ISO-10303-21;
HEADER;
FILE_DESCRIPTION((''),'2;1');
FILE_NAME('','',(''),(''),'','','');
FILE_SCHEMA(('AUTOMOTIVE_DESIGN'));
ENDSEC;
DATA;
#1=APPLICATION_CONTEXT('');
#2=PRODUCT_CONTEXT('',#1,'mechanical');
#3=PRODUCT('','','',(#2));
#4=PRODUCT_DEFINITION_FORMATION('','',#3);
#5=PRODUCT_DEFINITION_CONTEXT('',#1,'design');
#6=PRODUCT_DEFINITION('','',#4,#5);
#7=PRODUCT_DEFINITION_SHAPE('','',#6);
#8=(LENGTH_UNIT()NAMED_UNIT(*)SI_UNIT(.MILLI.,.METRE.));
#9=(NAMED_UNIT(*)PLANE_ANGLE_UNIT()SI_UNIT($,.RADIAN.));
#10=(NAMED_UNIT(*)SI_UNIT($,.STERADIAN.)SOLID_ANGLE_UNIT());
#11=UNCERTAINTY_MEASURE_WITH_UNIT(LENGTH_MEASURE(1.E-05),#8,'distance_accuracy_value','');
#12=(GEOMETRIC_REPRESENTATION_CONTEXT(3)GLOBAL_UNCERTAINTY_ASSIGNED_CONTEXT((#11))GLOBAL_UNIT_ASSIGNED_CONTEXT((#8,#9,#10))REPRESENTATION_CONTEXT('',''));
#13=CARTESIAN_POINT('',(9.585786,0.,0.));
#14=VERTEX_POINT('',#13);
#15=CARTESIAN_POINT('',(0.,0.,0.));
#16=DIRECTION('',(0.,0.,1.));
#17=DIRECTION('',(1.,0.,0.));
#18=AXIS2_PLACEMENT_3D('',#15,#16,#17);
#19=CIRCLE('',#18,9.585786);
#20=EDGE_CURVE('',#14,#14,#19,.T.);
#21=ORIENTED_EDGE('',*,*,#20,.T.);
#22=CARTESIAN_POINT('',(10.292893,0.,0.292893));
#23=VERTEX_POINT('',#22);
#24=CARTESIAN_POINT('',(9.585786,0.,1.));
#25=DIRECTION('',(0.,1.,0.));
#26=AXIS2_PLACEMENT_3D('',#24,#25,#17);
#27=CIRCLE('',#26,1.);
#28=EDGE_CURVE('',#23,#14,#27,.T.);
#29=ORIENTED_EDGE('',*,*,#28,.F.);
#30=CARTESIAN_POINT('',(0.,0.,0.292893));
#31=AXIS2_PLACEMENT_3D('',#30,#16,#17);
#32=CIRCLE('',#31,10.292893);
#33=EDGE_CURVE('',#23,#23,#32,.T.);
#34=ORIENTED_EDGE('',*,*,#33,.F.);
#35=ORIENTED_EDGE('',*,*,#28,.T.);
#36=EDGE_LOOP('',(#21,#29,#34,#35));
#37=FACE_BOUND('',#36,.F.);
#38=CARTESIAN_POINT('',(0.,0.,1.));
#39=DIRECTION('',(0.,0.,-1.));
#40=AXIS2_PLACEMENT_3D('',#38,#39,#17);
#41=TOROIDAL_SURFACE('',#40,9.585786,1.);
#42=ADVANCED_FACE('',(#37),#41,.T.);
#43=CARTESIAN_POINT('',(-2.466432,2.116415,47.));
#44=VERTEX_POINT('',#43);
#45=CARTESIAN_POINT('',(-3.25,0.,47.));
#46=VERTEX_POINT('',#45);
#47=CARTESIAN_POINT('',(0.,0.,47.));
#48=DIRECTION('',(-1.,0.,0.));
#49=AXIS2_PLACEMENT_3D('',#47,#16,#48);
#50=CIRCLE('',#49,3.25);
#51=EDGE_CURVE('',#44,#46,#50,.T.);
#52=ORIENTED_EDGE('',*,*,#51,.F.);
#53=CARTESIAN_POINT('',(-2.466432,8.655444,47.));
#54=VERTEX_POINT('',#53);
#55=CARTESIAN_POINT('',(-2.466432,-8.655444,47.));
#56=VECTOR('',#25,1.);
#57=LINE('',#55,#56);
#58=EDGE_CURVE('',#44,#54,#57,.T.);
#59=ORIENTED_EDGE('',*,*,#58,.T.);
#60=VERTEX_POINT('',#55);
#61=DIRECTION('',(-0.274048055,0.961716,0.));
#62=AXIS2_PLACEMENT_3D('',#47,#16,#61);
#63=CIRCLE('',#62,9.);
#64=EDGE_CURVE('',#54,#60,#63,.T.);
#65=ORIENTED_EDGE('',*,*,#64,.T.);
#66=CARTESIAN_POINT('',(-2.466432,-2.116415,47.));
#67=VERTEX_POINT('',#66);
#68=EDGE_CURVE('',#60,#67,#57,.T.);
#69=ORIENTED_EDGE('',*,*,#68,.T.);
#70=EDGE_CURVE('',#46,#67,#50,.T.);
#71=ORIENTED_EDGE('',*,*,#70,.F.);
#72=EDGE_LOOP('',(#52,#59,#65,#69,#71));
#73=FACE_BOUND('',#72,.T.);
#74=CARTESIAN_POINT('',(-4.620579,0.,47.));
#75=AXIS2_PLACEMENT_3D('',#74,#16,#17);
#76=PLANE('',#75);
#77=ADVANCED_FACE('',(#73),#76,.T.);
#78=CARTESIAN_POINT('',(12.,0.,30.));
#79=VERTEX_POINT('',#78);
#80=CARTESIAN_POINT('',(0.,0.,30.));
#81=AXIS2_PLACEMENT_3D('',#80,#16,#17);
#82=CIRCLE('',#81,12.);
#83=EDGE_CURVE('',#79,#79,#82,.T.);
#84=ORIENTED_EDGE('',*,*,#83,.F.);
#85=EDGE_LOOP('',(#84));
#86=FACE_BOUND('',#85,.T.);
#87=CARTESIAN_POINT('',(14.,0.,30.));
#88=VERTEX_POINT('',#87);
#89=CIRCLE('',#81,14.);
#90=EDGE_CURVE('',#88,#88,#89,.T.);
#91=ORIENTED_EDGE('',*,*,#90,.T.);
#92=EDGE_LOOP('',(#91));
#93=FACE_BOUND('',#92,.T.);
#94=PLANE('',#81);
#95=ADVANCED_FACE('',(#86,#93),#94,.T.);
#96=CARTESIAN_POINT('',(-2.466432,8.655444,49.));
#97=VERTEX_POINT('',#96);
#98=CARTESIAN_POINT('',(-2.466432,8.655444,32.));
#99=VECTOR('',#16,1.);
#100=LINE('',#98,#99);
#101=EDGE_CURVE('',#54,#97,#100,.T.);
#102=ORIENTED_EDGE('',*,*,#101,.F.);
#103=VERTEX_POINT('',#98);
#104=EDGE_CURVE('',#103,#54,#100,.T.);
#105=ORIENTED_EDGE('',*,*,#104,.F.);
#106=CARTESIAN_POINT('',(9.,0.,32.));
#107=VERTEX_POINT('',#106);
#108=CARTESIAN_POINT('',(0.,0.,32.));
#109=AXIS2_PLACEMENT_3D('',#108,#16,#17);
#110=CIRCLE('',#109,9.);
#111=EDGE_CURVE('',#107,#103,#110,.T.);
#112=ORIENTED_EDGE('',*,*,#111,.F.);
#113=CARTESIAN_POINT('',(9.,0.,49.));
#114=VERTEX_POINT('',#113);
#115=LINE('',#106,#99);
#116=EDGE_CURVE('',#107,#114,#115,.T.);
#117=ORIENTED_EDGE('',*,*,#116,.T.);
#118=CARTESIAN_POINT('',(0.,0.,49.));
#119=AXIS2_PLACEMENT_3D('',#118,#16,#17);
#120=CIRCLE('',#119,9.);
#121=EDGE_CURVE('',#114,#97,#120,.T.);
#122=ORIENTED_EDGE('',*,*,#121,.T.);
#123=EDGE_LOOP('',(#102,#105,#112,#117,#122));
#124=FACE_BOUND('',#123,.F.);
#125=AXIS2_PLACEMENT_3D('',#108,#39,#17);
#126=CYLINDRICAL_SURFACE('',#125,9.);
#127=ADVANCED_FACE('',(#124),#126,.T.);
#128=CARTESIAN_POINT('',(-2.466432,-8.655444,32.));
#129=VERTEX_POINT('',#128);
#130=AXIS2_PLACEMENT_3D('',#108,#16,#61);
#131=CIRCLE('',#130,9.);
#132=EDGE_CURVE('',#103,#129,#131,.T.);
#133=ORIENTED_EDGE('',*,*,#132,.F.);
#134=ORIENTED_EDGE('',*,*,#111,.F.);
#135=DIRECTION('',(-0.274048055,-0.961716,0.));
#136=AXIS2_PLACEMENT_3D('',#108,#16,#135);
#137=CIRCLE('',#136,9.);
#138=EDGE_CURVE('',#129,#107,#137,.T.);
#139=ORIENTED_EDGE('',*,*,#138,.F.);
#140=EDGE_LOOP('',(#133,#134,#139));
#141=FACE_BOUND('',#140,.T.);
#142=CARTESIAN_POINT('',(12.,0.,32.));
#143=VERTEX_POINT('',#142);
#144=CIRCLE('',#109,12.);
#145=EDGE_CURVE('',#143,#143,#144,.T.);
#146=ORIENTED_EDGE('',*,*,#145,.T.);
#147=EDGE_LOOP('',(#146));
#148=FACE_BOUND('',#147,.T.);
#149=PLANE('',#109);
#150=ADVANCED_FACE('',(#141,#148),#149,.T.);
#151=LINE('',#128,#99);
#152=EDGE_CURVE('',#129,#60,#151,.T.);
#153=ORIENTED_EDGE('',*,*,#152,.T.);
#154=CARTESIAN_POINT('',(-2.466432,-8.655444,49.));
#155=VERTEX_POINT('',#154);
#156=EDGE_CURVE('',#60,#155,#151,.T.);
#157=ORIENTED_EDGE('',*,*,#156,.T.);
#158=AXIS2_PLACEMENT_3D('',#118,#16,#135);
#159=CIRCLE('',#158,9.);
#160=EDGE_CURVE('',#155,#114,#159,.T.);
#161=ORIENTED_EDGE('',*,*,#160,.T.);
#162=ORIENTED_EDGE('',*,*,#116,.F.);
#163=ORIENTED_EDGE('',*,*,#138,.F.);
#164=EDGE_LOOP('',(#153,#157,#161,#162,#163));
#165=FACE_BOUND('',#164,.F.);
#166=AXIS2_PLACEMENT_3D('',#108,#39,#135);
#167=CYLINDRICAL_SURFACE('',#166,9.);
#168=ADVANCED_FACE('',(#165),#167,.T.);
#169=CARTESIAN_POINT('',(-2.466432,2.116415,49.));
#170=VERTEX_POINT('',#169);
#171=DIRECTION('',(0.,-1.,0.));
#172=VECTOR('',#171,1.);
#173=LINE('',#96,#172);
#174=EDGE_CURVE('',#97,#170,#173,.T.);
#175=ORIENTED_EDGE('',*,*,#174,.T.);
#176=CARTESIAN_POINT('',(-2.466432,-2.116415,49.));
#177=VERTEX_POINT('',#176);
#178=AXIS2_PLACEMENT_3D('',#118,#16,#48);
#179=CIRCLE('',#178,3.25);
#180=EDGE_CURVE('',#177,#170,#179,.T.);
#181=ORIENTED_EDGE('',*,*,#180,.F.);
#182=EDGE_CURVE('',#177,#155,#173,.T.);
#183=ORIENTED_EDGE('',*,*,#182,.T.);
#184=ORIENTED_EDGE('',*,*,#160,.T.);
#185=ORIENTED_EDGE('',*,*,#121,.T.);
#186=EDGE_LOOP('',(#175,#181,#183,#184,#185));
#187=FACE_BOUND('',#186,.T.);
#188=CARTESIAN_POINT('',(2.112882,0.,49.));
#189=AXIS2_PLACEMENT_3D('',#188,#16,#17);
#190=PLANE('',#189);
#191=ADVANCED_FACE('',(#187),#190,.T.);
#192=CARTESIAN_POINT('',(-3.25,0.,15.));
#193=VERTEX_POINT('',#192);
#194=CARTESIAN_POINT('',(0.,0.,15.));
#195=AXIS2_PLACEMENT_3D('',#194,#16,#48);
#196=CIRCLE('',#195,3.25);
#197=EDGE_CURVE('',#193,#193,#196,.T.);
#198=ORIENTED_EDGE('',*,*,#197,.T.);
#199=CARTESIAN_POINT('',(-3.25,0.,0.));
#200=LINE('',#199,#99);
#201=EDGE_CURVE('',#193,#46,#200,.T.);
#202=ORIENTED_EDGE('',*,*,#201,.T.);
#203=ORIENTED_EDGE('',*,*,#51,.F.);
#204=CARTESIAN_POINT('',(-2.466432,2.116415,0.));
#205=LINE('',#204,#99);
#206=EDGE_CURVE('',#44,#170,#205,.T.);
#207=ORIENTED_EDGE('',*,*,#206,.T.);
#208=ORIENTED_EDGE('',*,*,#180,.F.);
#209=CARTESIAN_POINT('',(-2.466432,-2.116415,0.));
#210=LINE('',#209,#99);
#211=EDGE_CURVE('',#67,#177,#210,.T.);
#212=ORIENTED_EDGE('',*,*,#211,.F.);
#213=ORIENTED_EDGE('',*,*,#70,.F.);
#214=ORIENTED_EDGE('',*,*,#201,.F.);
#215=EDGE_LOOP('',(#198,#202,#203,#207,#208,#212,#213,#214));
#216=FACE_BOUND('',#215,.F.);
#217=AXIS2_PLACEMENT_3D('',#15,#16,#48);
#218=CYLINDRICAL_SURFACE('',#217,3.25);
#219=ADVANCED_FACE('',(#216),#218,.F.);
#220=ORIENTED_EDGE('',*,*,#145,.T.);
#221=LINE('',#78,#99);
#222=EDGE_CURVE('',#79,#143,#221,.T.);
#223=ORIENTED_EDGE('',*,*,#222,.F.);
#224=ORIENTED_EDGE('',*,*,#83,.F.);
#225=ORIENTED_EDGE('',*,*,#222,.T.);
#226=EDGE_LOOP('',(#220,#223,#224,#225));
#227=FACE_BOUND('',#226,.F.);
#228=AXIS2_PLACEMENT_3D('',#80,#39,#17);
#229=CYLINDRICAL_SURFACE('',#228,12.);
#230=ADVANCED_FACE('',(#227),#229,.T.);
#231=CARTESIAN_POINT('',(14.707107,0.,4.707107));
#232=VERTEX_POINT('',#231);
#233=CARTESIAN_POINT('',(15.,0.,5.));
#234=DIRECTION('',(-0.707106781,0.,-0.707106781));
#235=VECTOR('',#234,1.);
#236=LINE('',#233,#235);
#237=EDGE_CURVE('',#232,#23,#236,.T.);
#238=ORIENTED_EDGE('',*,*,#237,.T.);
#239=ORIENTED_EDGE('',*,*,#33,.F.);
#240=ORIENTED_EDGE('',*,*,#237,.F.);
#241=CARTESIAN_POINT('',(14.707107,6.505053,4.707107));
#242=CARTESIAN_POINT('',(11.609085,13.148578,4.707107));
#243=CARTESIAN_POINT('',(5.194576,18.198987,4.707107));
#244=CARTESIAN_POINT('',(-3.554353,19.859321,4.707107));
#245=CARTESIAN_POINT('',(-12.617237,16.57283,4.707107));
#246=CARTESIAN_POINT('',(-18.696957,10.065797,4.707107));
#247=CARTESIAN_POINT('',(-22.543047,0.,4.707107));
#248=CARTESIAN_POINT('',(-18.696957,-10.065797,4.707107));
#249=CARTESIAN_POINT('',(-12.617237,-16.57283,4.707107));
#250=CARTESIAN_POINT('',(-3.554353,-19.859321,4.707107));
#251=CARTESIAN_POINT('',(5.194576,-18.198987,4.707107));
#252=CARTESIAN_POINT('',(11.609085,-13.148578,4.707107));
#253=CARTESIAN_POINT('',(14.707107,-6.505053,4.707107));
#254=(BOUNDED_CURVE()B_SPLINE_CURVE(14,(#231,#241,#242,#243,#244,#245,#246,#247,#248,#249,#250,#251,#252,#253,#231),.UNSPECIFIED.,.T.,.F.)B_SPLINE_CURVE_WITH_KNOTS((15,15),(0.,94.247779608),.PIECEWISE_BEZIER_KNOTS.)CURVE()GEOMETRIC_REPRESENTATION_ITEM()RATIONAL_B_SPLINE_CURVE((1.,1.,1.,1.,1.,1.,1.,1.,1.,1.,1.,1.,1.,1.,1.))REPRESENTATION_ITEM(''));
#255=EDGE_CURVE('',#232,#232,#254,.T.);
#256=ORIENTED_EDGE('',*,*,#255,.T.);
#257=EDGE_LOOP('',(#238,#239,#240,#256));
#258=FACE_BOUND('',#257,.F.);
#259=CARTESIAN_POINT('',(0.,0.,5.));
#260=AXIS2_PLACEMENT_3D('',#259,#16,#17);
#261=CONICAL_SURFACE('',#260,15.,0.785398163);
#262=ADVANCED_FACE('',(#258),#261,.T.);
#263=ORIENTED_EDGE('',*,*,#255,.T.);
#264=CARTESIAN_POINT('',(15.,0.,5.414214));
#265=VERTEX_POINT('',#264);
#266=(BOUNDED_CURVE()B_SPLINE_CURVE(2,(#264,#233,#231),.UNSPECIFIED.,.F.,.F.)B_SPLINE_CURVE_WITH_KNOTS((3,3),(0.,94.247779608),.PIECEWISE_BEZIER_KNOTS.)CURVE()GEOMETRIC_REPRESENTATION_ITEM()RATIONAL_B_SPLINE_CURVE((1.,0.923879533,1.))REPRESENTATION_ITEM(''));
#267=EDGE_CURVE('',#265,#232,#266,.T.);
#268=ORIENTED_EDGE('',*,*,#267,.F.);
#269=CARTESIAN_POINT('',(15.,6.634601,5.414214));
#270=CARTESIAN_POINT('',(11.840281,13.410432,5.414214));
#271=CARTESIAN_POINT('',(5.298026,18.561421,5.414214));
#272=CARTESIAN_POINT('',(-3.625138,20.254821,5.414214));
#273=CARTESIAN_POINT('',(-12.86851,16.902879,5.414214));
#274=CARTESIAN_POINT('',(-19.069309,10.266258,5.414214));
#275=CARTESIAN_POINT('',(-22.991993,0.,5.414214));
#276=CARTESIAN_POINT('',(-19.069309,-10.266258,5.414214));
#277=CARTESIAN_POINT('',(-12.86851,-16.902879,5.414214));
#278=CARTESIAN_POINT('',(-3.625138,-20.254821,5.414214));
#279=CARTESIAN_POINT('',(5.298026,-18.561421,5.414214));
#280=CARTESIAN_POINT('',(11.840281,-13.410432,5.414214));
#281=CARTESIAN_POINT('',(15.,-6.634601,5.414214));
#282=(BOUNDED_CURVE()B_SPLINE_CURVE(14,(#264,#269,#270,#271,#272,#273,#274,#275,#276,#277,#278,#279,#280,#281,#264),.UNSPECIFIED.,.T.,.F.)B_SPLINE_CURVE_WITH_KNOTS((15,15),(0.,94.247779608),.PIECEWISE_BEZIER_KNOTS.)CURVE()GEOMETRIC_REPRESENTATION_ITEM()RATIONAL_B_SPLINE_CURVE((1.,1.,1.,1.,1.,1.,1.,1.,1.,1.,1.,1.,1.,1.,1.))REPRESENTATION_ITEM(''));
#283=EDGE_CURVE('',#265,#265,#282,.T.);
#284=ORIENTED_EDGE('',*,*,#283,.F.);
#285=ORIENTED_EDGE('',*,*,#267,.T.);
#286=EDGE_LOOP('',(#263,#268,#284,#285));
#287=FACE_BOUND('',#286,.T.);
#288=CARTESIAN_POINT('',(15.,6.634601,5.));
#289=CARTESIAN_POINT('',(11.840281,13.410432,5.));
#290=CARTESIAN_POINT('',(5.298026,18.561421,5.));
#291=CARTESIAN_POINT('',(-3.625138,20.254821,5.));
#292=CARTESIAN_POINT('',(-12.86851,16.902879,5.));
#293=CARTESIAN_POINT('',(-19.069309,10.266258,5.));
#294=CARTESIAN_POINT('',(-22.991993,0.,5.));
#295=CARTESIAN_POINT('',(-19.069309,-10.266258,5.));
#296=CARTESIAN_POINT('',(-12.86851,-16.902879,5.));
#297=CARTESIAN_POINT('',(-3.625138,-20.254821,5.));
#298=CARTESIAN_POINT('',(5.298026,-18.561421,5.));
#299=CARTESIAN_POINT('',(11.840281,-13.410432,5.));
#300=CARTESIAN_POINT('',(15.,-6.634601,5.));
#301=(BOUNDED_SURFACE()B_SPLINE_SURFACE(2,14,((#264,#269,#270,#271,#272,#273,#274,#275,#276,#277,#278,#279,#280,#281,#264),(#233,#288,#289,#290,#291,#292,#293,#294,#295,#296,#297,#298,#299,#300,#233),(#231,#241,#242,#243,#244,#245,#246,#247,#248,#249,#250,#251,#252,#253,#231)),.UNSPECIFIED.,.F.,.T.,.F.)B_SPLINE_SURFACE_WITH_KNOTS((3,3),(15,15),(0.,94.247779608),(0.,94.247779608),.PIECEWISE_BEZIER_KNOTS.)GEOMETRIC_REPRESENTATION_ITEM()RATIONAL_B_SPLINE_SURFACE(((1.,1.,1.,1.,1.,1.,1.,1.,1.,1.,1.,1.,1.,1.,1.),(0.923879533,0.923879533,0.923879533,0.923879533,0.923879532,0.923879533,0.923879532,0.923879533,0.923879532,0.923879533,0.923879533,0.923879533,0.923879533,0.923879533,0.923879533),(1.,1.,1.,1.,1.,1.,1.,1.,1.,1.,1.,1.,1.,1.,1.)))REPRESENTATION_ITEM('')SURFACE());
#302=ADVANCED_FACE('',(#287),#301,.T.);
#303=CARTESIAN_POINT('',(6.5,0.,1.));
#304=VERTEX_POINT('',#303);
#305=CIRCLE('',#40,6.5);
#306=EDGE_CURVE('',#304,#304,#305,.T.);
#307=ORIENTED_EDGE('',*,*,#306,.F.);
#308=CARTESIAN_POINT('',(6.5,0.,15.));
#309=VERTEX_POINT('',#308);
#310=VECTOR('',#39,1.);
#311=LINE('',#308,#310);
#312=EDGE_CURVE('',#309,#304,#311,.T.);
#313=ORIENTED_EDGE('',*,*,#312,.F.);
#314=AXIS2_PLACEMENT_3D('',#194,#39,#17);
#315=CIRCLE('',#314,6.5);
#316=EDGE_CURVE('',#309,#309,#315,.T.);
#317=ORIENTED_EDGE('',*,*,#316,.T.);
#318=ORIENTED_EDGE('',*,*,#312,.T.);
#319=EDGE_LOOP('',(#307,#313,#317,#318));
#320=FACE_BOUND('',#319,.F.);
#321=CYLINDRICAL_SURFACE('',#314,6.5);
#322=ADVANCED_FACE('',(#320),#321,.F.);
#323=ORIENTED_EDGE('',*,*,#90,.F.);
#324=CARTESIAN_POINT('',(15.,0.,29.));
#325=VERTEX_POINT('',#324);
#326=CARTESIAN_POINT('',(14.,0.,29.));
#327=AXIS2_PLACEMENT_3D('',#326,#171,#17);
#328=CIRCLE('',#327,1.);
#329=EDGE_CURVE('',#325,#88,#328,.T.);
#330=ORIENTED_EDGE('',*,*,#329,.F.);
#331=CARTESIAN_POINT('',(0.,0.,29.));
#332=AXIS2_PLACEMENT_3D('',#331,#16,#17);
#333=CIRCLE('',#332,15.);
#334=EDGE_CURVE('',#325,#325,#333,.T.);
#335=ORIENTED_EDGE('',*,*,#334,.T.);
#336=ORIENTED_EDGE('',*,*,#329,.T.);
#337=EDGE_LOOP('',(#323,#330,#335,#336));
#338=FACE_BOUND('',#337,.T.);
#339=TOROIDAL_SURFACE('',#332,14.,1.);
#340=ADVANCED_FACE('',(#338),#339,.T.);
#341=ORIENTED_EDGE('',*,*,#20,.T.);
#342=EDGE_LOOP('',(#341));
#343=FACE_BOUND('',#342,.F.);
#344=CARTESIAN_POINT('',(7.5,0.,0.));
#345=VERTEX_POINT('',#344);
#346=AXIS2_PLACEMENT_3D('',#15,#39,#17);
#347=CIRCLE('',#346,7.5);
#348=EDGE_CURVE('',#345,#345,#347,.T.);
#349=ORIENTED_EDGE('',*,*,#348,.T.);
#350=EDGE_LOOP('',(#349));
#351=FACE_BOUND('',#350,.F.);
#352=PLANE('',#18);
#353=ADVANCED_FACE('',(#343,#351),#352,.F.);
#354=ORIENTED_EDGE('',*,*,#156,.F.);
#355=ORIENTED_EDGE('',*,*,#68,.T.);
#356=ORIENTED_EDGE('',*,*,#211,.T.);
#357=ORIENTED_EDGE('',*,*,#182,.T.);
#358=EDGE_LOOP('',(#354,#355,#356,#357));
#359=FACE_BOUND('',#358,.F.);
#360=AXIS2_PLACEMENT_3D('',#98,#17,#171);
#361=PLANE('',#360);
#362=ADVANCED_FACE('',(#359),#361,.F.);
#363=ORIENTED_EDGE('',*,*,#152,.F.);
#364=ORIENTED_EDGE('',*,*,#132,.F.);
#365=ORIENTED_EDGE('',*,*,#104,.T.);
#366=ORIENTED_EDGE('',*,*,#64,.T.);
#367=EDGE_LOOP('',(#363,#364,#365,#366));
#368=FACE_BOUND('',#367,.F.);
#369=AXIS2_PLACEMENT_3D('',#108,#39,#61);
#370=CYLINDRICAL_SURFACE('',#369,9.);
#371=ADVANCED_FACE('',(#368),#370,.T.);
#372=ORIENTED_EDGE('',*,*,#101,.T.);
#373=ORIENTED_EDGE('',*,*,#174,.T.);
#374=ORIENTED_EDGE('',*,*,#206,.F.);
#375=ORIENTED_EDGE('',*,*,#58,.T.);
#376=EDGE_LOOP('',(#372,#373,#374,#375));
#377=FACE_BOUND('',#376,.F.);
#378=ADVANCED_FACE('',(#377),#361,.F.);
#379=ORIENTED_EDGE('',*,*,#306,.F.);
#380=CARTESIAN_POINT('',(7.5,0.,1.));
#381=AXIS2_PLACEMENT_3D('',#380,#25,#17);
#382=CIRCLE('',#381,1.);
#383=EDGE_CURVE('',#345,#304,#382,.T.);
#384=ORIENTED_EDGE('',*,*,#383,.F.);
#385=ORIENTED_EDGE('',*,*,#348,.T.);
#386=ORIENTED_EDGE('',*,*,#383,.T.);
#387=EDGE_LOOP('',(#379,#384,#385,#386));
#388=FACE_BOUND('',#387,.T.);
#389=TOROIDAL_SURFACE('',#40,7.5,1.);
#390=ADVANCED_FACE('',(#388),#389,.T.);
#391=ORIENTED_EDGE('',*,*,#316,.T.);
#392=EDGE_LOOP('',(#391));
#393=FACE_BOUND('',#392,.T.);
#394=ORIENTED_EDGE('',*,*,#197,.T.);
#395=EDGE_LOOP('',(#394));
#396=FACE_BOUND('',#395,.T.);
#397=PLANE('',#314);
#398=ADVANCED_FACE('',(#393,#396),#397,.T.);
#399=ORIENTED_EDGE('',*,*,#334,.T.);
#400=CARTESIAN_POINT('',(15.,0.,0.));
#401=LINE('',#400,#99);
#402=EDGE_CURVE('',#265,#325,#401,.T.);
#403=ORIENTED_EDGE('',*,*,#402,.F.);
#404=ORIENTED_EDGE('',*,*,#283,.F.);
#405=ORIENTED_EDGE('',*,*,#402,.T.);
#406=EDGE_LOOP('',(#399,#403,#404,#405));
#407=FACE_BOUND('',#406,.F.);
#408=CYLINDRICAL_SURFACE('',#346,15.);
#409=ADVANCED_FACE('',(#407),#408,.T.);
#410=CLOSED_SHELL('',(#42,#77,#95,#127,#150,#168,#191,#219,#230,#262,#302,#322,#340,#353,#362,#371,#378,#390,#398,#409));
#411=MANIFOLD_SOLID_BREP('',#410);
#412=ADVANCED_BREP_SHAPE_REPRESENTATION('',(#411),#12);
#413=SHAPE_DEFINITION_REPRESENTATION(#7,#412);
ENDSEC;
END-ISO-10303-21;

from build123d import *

# Parameters (mm, degrees)
F0_R           = 15
F1_DEPTH       = 30
F2_R           = 12
F3_DEPTH       = 2
F5_DEPTH       = 17
F6_DEPTH       = 15
F7_D           = 6.5
F7_CBORE_D     = 13
F7_CBORE_DEPTH = 15
F8_SIZE        = 5
F9_R           = 1


with BuildPart() as f1:
    # F0 (on Top) → F1 (new body)
    with BuildSketch(Plane.XY):
        Circle(F0_R)
    extrude(amount=F1_DEPTH)

    # F2 (on face) → F3 (join)
    with BuildSketch(Plane.XY.offset(30)):
        Circle(F2_R)
    extrude(amount=F3_DEPTH)

    # F4 (on face) → F5 (join)
    with BuildSketch(Plane.XY.offset(32)):
        with BuildLine():
            ThreePointArc((-2.4664324925, -8.6554439955), (5.4222738573, -7.1832406486), (9, 0))
            ThreePointArc((9, 0), (5.4222738573, 7.1832406486), (-2.4664324925, 8.6554439955))
            Line((-2.4664324925, 8.6554439955), (-2.4664324925, -8.6554439955))
        make_face()
    extrude(amount=F5_DEPTH)

    # F4 (on face) → F6 (join)
    with BuildSketch(Plane.XY.offset(32)):
        with BuildLine():
            Line((-2.4664324925, -8.6554439955), (-2.4664324925, 8.6554439955))
            ThreePointArc((-2.4664324925, 8.6554439955), (-9, 0), (-2.4664324925, -8.6554439955))
        make_face()
    extrude(amount=F6_DEPTH)

    # F7 (through all)
    with Locations(Plane(origin=(0, 0, 0), x_dir=(1, 0, 0), z_dir=(0, 0, -1))):
        with Locations((0, 0)):
            CounterBoreHole(F7_D / 2, F7_CBORE_D / 2, F7_CBORE_DEPTH)

    # F8
    f8_edges = [f1.edges().sort_by_distance(p)[0] for p in [
        (-15, 0, 0),
    ]]
    chamfer(f8_edges, length=F8_SIZE)

    # F9
    f9_edges = [f1.edges().sort_by_distance(p)[0] for p in [
        (-15, 0, 30),
        (-10, 0, 0),
        (-15, 0, 5),
        (-6.5, 0, 0),
    ]]
    fillet(f9_edges, radius=F9_R)


solid = f1.part
